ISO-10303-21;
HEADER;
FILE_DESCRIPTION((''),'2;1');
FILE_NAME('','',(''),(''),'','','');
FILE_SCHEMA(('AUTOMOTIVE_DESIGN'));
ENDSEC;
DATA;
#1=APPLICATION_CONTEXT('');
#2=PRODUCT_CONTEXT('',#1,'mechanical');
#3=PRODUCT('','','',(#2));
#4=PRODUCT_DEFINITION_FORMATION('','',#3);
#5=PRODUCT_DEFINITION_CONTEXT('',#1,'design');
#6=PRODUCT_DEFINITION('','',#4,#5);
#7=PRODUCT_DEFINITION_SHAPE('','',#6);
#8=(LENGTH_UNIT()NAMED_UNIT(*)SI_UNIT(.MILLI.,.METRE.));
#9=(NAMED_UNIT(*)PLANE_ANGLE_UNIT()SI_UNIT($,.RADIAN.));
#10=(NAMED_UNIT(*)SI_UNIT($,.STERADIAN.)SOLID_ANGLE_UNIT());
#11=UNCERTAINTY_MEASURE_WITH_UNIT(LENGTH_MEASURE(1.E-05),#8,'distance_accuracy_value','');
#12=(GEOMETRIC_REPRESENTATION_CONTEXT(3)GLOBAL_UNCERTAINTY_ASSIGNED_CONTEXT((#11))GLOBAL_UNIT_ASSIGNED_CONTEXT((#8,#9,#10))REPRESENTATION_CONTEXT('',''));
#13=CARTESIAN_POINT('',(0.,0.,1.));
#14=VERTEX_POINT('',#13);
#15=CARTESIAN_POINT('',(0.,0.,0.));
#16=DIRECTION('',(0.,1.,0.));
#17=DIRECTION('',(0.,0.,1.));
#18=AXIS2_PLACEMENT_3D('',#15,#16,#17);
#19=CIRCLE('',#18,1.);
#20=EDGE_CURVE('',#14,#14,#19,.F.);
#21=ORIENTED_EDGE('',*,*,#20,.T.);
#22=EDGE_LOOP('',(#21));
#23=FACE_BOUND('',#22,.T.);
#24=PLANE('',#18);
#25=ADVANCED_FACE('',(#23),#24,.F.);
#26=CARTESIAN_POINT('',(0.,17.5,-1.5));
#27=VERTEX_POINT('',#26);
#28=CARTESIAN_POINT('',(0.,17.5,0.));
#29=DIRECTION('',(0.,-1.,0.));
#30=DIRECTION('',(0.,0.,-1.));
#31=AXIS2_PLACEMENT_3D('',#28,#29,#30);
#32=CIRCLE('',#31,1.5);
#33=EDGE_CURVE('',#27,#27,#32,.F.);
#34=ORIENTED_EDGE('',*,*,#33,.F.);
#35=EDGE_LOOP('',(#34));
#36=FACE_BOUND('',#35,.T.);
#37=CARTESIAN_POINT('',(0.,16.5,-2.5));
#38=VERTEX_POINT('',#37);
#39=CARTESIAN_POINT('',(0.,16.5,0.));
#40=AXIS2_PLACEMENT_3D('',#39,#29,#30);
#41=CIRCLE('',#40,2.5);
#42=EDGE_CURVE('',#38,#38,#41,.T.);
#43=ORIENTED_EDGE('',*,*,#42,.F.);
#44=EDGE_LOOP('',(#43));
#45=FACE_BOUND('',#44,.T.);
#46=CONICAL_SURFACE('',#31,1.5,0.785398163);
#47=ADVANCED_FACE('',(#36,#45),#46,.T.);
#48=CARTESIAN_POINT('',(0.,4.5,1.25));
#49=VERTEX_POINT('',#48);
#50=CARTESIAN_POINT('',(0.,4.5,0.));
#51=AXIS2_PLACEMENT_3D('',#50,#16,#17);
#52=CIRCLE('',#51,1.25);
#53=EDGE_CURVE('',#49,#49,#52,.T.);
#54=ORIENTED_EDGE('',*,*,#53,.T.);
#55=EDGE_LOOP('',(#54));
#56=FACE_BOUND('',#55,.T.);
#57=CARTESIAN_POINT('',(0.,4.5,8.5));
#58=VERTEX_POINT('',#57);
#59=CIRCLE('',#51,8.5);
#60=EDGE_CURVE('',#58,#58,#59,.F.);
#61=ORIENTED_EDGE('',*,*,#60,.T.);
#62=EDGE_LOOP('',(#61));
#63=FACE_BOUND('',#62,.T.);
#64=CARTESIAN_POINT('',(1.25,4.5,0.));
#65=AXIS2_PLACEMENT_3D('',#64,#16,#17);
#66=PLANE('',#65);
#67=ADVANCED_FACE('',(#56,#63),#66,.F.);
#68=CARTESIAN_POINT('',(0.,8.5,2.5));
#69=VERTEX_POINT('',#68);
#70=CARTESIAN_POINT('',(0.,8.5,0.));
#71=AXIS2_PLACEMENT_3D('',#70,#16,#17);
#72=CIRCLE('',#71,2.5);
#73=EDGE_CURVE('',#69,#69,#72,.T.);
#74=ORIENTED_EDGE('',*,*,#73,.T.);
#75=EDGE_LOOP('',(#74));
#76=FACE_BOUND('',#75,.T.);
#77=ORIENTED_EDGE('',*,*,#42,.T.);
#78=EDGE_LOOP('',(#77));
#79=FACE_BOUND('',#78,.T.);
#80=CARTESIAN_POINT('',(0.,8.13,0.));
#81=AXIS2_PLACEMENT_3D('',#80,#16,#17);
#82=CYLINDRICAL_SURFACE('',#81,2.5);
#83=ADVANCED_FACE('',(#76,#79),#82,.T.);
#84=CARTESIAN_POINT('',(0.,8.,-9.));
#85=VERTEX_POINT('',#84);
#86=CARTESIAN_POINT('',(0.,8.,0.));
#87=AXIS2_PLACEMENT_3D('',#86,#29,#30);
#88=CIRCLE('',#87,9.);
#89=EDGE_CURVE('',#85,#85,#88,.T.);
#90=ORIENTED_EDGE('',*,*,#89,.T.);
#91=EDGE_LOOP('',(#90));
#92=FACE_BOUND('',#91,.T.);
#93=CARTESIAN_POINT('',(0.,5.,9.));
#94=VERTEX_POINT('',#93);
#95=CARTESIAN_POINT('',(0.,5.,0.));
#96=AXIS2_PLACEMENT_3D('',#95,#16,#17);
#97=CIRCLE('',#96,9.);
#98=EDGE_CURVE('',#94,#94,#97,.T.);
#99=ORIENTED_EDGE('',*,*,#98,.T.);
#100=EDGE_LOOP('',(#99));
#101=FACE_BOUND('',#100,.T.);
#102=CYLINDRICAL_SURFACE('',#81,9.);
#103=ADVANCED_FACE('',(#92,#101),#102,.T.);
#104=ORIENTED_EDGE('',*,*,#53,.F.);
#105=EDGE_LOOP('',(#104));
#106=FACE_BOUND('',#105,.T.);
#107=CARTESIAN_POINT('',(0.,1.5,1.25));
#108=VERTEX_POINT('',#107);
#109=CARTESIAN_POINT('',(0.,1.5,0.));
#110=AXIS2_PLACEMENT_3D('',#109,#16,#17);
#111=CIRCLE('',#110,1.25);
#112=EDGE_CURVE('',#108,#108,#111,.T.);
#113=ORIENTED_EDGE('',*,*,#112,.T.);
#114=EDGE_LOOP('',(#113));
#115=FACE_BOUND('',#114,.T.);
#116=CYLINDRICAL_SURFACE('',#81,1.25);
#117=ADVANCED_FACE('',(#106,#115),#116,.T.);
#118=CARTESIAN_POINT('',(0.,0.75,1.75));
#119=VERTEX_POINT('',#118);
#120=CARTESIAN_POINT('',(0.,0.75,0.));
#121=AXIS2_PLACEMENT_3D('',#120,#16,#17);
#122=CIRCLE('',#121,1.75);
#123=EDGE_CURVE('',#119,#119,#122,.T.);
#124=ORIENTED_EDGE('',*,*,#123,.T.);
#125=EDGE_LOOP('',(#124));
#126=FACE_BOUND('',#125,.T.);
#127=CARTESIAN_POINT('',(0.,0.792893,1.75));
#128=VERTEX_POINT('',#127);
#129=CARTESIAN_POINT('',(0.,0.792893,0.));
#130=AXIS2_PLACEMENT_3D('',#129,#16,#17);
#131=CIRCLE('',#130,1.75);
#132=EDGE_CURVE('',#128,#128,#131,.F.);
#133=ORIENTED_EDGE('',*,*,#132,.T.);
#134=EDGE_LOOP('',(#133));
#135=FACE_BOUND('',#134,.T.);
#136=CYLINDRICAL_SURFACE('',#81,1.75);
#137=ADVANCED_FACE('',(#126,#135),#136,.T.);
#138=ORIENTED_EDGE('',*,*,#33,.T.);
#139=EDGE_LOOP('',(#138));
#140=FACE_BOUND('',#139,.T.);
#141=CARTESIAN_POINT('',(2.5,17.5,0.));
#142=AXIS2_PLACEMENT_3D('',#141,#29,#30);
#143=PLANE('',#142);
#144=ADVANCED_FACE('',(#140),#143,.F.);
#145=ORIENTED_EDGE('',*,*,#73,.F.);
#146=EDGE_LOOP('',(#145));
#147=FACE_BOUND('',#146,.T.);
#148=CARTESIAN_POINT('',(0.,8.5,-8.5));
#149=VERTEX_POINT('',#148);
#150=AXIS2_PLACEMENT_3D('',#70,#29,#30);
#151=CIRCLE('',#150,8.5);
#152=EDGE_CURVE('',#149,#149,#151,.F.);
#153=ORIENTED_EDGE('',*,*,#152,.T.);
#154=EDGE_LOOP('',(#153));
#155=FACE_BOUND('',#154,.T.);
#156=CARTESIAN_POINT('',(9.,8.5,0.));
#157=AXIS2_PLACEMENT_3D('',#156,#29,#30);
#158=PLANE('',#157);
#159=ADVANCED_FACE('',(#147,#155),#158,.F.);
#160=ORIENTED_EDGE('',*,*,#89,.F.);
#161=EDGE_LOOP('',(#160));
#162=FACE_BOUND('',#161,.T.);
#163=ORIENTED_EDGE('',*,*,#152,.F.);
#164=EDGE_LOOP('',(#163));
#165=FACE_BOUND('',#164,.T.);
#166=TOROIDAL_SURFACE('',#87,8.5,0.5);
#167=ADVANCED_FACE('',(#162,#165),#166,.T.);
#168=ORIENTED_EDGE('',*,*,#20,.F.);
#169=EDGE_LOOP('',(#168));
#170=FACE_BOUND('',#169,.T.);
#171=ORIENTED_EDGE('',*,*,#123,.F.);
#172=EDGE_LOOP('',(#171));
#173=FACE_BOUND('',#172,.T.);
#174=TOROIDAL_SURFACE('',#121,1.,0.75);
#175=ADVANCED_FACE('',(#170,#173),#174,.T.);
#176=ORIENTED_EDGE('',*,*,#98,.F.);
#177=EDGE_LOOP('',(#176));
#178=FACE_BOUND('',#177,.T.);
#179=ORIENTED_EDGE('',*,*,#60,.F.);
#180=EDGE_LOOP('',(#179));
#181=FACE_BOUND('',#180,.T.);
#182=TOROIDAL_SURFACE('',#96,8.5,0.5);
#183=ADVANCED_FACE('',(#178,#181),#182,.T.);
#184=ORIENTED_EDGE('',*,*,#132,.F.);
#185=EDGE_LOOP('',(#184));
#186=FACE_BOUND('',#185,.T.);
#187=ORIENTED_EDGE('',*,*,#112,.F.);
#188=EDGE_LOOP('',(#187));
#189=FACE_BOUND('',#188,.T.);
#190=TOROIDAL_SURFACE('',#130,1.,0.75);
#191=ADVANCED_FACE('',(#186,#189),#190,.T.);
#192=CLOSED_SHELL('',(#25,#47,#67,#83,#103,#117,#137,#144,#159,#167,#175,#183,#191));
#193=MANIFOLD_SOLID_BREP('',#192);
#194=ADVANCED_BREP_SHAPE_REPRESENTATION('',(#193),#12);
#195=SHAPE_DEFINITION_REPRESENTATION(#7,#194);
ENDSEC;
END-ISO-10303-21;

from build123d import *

# Parameters (mm, degrees)
FILLET4_R     = 0.5
CHAMFER1_SIZE = 1
FILLET6_R     = 0.75


with BuildPart() as part:
    # Sketch1 → Revolve1 (revolve)
    with BuildSketch(Plane.XY, mode=Mode.PRIVATE) as revolve1_sk:
        Polygon((0, 0), (1.75, 0), (1.75, 1.5), (1.25, 1.5), (1.25, 4.5), (9, 4.5), (9, 8.5), (2.5, 8.5), (2.5, 17.5), (0, 17.5), align=None)
    revolve(revolve1_sk.sketch.rotate(Axis((0, 8.13, 0), (0, -1, 0)), 90), axis=Axis((0, 8.13, 0), (0, -1, 0)))

    # Fillet4
    fillet4_edges = [part.edges().sort_by_distance(p)[0] for p in [
        (0, 8.5, -9),
        (0, 4.5, -9),
    ]]
    fillet(fillet4_edges, radius=FILLET4_R)

    # Chamfer1
    chamfer1_edges = [part.edges().sort_by_distance(p)[0] for p in [
        (0, 17.5, -2.5),
    ]]
    chamfer(chamfer1_edges, length=CHAMFER1_SIZE)

    # Fillet6
    # the kernel refuses this fillet: 0.75 mm, written as the material it takes off along each edge
    with BuildSketch(Plane(origin=(0, 1.5, 0), x_dir=(0, 0, 1), z_dir=(1, 0, 0))) as fillet6_piece_1:
        with BuildLine():
            CenterArc((1, 0.707106781), FILLET6_R, 289.471220634, 70.528779366)
            Line((1.75, 0.707106781), (1.765, 0.707106781))
            Line((1.765, 0.707106781), (1.765, 0))
            Line((1.765, 0), (1.75, -0.015))
            ThreePointArc((1.75, -0.015), (1.5, -0.015), (1.255, -0.014142136))
            Line((1.255, -0.014142136), (1.25, 0))
        make_face()
    revolve(axis=Axis((0, 1.5, 0), (0, -1, 0)), mode=Mode.SUBTRACT)
    with BuildSketch(Plane(origin=(0, 0, 0), x_dir=(0, 0, 1), z_dir=(1, 0, 0))) as fillet6_piece_2:
        with BuildLine():
            CenterArc((1.75 - FILLET6_R, -FILLET6_R), FILLET6_R, 0, 90)
            Line((1.75 - FILLET6_R, 0), (1.75 - FILLET6_R, FILLET6_R * 0.02))
            Line((1.75 - FILLET6_R, FILLET6_R * 0.02), (1.75 + FILLET6_R * 0.02, FILLET6_R * 0.02))
            Line((1.75 + FILLET6_R * 0.02, FILLET6_R * 0.02), (1.75 + FILLET6_R * 0.02, -FILLET6_R))
            Line((1.75 + FILLET6_R * 0.02, -FILLET6_R), (1.75, -FILLET6_R))
        make_face()
    revolve(axis=Axis((0, 0, 0), (0, -1, 0)), mode=Mode.SUBTRACT)


solid = part.part
